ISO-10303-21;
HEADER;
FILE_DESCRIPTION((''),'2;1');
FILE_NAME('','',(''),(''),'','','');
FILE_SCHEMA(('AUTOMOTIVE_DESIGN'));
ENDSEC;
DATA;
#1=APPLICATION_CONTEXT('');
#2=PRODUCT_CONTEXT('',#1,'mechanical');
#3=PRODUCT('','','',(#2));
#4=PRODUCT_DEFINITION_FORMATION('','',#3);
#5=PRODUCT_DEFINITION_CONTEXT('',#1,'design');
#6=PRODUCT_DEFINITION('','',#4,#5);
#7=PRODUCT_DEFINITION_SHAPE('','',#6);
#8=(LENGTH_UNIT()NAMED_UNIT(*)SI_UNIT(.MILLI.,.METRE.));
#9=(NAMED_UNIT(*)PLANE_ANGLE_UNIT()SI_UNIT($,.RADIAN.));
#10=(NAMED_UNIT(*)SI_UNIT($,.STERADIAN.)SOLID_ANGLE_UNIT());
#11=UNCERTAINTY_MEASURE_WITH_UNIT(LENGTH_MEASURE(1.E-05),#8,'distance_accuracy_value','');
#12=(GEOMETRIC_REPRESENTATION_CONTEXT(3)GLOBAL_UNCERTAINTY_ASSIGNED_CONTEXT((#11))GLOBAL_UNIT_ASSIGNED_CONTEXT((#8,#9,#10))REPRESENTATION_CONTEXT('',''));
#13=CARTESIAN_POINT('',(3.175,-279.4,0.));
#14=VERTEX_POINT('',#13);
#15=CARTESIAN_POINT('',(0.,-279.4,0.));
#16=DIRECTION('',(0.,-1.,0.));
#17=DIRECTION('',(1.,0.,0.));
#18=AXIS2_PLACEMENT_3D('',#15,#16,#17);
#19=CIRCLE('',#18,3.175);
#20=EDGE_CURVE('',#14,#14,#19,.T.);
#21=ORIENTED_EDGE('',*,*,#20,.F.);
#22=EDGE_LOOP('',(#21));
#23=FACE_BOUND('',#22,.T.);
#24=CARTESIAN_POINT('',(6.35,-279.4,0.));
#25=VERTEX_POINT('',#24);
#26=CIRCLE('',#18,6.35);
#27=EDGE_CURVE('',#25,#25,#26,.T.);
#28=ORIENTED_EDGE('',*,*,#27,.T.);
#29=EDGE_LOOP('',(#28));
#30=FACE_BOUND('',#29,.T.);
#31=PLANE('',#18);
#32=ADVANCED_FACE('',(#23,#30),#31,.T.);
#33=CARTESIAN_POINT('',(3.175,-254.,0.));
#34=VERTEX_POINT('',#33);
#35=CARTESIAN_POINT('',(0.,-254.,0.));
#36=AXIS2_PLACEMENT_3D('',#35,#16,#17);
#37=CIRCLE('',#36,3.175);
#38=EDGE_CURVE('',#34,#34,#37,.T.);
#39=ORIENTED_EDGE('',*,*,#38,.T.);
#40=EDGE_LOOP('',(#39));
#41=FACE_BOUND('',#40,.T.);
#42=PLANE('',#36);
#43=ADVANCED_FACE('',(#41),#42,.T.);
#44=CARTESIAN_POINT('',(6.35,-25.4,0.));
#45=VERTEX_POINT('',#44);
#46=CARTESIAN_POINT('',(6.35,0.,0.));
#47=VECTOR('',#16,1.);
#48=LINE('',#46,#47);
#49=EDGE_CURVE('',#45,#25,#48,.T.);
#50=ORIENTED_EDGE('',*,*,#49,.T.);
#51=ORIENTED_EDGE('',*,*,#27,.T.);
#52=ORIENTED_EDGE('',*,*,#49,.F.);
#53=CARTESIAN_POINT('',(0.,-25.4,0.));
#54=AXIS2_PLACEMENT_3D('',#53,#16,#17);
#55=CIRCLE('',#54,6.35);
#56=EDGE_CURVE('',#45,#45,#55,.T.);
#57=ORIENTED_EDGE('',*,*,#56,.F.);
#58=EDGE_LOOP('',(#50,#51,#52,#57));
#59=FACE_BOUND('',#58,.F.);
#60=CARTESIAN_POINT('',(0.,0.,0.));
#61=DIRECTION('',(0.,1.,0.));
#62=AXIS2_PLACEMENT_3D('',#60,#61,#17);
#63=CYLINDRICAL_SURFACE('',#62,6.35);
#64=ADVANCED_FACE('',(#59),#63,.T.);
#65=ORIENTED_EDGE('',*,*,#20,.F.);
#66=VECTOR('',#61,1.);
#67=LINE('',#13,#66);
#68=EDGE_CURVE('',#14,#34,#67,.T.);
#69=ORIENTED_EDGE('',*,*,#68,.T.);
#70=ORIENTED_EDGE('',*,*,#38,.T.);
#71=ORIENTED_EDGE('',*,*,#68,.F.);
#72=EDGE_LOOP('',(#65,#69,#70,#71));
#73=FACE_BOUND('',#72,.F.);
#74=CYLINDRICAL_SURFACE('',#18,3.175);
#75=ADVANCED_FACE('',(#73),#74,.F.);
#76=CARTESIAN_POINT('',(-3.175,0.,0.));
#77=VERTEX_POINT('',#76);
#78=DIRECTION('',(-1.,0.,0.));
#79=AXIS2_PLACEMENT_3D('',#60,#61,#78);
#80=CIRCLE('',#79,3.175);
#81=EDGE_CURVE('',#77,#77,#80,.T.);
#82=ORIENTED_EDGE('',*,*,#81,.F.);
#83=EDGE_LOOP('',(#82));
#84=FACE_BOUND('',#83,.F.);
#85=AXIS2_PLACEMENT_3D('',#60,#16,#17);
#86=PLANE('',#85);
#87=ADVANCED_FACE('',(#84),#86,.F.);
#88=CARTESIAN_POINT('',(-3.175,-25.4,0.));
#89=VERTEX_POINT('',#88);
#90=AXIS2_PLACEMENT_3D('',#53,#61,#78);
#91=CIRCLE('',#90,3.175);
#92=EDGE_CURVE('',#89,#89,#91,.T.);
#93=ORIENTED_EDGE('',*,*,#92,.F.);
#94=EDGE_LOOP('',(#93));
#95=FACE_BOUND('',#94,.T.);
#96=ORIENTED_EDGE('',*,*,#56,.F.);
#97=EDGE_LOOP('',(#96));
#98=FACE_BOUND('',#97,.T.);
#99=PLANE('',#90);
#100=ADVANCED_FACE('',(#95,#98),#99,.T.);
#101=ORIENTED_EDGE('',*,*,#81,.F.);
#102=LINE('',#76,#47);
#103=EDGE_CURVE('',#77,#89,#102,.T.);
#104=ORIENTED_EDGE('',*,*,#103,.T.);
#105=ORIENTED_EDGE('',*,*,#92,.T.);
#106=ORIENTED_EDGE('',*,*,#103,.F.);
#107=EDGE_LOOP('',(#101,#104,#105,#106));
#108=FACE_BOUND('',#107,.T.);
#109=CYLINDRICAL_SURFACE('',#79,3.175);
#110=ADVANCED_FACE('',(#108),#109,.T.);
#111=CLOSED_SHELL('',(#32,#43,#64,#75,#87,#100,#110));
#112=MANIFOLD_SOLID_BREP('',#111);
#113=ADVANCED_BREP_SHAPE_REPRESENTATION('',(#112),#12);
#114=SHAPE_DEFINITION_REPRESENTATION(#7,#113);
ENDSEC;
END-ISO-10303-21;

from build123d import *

# Parameters (mm, degrees)
F0_R     = 6.35
F1_DEPTH = 279.4
F2_R     = 6.35
F2_R_2   = 3.175
F3_DEPTH = 25.4
F4_R     = 3.175
F5_DEPTH = 25.4


with BuildPart() as f1:
    # F0 (on Front) → F1 (new body)
    with BuildSketch(Plane.XZ):
        Circle(F0_R)
    extrude(amount=F1_DEPTH)

    # F2 (on face) → F3 (cut)
    with BuildSketch(Plane(origin=(0, 0, 0), x_dir=(-1, 0, 0), z_dir=(0, 1, 0))):
        Circle(F2_R)
        Circle(F2_R_2, mode=Mode.SUBTRACT)
    extrude(amount=-F3_DEPTH, mode=Mode.SUBTRACT)

    # F4 (on face) → F5 (cut)
    with BuildSketch(Plane.XZ.offset(279.4)):
        Circle(F4_R)
    extrude(amount=-F5_DEPTH, mode=Mode.SUBTRACT)


solid = f1.part
